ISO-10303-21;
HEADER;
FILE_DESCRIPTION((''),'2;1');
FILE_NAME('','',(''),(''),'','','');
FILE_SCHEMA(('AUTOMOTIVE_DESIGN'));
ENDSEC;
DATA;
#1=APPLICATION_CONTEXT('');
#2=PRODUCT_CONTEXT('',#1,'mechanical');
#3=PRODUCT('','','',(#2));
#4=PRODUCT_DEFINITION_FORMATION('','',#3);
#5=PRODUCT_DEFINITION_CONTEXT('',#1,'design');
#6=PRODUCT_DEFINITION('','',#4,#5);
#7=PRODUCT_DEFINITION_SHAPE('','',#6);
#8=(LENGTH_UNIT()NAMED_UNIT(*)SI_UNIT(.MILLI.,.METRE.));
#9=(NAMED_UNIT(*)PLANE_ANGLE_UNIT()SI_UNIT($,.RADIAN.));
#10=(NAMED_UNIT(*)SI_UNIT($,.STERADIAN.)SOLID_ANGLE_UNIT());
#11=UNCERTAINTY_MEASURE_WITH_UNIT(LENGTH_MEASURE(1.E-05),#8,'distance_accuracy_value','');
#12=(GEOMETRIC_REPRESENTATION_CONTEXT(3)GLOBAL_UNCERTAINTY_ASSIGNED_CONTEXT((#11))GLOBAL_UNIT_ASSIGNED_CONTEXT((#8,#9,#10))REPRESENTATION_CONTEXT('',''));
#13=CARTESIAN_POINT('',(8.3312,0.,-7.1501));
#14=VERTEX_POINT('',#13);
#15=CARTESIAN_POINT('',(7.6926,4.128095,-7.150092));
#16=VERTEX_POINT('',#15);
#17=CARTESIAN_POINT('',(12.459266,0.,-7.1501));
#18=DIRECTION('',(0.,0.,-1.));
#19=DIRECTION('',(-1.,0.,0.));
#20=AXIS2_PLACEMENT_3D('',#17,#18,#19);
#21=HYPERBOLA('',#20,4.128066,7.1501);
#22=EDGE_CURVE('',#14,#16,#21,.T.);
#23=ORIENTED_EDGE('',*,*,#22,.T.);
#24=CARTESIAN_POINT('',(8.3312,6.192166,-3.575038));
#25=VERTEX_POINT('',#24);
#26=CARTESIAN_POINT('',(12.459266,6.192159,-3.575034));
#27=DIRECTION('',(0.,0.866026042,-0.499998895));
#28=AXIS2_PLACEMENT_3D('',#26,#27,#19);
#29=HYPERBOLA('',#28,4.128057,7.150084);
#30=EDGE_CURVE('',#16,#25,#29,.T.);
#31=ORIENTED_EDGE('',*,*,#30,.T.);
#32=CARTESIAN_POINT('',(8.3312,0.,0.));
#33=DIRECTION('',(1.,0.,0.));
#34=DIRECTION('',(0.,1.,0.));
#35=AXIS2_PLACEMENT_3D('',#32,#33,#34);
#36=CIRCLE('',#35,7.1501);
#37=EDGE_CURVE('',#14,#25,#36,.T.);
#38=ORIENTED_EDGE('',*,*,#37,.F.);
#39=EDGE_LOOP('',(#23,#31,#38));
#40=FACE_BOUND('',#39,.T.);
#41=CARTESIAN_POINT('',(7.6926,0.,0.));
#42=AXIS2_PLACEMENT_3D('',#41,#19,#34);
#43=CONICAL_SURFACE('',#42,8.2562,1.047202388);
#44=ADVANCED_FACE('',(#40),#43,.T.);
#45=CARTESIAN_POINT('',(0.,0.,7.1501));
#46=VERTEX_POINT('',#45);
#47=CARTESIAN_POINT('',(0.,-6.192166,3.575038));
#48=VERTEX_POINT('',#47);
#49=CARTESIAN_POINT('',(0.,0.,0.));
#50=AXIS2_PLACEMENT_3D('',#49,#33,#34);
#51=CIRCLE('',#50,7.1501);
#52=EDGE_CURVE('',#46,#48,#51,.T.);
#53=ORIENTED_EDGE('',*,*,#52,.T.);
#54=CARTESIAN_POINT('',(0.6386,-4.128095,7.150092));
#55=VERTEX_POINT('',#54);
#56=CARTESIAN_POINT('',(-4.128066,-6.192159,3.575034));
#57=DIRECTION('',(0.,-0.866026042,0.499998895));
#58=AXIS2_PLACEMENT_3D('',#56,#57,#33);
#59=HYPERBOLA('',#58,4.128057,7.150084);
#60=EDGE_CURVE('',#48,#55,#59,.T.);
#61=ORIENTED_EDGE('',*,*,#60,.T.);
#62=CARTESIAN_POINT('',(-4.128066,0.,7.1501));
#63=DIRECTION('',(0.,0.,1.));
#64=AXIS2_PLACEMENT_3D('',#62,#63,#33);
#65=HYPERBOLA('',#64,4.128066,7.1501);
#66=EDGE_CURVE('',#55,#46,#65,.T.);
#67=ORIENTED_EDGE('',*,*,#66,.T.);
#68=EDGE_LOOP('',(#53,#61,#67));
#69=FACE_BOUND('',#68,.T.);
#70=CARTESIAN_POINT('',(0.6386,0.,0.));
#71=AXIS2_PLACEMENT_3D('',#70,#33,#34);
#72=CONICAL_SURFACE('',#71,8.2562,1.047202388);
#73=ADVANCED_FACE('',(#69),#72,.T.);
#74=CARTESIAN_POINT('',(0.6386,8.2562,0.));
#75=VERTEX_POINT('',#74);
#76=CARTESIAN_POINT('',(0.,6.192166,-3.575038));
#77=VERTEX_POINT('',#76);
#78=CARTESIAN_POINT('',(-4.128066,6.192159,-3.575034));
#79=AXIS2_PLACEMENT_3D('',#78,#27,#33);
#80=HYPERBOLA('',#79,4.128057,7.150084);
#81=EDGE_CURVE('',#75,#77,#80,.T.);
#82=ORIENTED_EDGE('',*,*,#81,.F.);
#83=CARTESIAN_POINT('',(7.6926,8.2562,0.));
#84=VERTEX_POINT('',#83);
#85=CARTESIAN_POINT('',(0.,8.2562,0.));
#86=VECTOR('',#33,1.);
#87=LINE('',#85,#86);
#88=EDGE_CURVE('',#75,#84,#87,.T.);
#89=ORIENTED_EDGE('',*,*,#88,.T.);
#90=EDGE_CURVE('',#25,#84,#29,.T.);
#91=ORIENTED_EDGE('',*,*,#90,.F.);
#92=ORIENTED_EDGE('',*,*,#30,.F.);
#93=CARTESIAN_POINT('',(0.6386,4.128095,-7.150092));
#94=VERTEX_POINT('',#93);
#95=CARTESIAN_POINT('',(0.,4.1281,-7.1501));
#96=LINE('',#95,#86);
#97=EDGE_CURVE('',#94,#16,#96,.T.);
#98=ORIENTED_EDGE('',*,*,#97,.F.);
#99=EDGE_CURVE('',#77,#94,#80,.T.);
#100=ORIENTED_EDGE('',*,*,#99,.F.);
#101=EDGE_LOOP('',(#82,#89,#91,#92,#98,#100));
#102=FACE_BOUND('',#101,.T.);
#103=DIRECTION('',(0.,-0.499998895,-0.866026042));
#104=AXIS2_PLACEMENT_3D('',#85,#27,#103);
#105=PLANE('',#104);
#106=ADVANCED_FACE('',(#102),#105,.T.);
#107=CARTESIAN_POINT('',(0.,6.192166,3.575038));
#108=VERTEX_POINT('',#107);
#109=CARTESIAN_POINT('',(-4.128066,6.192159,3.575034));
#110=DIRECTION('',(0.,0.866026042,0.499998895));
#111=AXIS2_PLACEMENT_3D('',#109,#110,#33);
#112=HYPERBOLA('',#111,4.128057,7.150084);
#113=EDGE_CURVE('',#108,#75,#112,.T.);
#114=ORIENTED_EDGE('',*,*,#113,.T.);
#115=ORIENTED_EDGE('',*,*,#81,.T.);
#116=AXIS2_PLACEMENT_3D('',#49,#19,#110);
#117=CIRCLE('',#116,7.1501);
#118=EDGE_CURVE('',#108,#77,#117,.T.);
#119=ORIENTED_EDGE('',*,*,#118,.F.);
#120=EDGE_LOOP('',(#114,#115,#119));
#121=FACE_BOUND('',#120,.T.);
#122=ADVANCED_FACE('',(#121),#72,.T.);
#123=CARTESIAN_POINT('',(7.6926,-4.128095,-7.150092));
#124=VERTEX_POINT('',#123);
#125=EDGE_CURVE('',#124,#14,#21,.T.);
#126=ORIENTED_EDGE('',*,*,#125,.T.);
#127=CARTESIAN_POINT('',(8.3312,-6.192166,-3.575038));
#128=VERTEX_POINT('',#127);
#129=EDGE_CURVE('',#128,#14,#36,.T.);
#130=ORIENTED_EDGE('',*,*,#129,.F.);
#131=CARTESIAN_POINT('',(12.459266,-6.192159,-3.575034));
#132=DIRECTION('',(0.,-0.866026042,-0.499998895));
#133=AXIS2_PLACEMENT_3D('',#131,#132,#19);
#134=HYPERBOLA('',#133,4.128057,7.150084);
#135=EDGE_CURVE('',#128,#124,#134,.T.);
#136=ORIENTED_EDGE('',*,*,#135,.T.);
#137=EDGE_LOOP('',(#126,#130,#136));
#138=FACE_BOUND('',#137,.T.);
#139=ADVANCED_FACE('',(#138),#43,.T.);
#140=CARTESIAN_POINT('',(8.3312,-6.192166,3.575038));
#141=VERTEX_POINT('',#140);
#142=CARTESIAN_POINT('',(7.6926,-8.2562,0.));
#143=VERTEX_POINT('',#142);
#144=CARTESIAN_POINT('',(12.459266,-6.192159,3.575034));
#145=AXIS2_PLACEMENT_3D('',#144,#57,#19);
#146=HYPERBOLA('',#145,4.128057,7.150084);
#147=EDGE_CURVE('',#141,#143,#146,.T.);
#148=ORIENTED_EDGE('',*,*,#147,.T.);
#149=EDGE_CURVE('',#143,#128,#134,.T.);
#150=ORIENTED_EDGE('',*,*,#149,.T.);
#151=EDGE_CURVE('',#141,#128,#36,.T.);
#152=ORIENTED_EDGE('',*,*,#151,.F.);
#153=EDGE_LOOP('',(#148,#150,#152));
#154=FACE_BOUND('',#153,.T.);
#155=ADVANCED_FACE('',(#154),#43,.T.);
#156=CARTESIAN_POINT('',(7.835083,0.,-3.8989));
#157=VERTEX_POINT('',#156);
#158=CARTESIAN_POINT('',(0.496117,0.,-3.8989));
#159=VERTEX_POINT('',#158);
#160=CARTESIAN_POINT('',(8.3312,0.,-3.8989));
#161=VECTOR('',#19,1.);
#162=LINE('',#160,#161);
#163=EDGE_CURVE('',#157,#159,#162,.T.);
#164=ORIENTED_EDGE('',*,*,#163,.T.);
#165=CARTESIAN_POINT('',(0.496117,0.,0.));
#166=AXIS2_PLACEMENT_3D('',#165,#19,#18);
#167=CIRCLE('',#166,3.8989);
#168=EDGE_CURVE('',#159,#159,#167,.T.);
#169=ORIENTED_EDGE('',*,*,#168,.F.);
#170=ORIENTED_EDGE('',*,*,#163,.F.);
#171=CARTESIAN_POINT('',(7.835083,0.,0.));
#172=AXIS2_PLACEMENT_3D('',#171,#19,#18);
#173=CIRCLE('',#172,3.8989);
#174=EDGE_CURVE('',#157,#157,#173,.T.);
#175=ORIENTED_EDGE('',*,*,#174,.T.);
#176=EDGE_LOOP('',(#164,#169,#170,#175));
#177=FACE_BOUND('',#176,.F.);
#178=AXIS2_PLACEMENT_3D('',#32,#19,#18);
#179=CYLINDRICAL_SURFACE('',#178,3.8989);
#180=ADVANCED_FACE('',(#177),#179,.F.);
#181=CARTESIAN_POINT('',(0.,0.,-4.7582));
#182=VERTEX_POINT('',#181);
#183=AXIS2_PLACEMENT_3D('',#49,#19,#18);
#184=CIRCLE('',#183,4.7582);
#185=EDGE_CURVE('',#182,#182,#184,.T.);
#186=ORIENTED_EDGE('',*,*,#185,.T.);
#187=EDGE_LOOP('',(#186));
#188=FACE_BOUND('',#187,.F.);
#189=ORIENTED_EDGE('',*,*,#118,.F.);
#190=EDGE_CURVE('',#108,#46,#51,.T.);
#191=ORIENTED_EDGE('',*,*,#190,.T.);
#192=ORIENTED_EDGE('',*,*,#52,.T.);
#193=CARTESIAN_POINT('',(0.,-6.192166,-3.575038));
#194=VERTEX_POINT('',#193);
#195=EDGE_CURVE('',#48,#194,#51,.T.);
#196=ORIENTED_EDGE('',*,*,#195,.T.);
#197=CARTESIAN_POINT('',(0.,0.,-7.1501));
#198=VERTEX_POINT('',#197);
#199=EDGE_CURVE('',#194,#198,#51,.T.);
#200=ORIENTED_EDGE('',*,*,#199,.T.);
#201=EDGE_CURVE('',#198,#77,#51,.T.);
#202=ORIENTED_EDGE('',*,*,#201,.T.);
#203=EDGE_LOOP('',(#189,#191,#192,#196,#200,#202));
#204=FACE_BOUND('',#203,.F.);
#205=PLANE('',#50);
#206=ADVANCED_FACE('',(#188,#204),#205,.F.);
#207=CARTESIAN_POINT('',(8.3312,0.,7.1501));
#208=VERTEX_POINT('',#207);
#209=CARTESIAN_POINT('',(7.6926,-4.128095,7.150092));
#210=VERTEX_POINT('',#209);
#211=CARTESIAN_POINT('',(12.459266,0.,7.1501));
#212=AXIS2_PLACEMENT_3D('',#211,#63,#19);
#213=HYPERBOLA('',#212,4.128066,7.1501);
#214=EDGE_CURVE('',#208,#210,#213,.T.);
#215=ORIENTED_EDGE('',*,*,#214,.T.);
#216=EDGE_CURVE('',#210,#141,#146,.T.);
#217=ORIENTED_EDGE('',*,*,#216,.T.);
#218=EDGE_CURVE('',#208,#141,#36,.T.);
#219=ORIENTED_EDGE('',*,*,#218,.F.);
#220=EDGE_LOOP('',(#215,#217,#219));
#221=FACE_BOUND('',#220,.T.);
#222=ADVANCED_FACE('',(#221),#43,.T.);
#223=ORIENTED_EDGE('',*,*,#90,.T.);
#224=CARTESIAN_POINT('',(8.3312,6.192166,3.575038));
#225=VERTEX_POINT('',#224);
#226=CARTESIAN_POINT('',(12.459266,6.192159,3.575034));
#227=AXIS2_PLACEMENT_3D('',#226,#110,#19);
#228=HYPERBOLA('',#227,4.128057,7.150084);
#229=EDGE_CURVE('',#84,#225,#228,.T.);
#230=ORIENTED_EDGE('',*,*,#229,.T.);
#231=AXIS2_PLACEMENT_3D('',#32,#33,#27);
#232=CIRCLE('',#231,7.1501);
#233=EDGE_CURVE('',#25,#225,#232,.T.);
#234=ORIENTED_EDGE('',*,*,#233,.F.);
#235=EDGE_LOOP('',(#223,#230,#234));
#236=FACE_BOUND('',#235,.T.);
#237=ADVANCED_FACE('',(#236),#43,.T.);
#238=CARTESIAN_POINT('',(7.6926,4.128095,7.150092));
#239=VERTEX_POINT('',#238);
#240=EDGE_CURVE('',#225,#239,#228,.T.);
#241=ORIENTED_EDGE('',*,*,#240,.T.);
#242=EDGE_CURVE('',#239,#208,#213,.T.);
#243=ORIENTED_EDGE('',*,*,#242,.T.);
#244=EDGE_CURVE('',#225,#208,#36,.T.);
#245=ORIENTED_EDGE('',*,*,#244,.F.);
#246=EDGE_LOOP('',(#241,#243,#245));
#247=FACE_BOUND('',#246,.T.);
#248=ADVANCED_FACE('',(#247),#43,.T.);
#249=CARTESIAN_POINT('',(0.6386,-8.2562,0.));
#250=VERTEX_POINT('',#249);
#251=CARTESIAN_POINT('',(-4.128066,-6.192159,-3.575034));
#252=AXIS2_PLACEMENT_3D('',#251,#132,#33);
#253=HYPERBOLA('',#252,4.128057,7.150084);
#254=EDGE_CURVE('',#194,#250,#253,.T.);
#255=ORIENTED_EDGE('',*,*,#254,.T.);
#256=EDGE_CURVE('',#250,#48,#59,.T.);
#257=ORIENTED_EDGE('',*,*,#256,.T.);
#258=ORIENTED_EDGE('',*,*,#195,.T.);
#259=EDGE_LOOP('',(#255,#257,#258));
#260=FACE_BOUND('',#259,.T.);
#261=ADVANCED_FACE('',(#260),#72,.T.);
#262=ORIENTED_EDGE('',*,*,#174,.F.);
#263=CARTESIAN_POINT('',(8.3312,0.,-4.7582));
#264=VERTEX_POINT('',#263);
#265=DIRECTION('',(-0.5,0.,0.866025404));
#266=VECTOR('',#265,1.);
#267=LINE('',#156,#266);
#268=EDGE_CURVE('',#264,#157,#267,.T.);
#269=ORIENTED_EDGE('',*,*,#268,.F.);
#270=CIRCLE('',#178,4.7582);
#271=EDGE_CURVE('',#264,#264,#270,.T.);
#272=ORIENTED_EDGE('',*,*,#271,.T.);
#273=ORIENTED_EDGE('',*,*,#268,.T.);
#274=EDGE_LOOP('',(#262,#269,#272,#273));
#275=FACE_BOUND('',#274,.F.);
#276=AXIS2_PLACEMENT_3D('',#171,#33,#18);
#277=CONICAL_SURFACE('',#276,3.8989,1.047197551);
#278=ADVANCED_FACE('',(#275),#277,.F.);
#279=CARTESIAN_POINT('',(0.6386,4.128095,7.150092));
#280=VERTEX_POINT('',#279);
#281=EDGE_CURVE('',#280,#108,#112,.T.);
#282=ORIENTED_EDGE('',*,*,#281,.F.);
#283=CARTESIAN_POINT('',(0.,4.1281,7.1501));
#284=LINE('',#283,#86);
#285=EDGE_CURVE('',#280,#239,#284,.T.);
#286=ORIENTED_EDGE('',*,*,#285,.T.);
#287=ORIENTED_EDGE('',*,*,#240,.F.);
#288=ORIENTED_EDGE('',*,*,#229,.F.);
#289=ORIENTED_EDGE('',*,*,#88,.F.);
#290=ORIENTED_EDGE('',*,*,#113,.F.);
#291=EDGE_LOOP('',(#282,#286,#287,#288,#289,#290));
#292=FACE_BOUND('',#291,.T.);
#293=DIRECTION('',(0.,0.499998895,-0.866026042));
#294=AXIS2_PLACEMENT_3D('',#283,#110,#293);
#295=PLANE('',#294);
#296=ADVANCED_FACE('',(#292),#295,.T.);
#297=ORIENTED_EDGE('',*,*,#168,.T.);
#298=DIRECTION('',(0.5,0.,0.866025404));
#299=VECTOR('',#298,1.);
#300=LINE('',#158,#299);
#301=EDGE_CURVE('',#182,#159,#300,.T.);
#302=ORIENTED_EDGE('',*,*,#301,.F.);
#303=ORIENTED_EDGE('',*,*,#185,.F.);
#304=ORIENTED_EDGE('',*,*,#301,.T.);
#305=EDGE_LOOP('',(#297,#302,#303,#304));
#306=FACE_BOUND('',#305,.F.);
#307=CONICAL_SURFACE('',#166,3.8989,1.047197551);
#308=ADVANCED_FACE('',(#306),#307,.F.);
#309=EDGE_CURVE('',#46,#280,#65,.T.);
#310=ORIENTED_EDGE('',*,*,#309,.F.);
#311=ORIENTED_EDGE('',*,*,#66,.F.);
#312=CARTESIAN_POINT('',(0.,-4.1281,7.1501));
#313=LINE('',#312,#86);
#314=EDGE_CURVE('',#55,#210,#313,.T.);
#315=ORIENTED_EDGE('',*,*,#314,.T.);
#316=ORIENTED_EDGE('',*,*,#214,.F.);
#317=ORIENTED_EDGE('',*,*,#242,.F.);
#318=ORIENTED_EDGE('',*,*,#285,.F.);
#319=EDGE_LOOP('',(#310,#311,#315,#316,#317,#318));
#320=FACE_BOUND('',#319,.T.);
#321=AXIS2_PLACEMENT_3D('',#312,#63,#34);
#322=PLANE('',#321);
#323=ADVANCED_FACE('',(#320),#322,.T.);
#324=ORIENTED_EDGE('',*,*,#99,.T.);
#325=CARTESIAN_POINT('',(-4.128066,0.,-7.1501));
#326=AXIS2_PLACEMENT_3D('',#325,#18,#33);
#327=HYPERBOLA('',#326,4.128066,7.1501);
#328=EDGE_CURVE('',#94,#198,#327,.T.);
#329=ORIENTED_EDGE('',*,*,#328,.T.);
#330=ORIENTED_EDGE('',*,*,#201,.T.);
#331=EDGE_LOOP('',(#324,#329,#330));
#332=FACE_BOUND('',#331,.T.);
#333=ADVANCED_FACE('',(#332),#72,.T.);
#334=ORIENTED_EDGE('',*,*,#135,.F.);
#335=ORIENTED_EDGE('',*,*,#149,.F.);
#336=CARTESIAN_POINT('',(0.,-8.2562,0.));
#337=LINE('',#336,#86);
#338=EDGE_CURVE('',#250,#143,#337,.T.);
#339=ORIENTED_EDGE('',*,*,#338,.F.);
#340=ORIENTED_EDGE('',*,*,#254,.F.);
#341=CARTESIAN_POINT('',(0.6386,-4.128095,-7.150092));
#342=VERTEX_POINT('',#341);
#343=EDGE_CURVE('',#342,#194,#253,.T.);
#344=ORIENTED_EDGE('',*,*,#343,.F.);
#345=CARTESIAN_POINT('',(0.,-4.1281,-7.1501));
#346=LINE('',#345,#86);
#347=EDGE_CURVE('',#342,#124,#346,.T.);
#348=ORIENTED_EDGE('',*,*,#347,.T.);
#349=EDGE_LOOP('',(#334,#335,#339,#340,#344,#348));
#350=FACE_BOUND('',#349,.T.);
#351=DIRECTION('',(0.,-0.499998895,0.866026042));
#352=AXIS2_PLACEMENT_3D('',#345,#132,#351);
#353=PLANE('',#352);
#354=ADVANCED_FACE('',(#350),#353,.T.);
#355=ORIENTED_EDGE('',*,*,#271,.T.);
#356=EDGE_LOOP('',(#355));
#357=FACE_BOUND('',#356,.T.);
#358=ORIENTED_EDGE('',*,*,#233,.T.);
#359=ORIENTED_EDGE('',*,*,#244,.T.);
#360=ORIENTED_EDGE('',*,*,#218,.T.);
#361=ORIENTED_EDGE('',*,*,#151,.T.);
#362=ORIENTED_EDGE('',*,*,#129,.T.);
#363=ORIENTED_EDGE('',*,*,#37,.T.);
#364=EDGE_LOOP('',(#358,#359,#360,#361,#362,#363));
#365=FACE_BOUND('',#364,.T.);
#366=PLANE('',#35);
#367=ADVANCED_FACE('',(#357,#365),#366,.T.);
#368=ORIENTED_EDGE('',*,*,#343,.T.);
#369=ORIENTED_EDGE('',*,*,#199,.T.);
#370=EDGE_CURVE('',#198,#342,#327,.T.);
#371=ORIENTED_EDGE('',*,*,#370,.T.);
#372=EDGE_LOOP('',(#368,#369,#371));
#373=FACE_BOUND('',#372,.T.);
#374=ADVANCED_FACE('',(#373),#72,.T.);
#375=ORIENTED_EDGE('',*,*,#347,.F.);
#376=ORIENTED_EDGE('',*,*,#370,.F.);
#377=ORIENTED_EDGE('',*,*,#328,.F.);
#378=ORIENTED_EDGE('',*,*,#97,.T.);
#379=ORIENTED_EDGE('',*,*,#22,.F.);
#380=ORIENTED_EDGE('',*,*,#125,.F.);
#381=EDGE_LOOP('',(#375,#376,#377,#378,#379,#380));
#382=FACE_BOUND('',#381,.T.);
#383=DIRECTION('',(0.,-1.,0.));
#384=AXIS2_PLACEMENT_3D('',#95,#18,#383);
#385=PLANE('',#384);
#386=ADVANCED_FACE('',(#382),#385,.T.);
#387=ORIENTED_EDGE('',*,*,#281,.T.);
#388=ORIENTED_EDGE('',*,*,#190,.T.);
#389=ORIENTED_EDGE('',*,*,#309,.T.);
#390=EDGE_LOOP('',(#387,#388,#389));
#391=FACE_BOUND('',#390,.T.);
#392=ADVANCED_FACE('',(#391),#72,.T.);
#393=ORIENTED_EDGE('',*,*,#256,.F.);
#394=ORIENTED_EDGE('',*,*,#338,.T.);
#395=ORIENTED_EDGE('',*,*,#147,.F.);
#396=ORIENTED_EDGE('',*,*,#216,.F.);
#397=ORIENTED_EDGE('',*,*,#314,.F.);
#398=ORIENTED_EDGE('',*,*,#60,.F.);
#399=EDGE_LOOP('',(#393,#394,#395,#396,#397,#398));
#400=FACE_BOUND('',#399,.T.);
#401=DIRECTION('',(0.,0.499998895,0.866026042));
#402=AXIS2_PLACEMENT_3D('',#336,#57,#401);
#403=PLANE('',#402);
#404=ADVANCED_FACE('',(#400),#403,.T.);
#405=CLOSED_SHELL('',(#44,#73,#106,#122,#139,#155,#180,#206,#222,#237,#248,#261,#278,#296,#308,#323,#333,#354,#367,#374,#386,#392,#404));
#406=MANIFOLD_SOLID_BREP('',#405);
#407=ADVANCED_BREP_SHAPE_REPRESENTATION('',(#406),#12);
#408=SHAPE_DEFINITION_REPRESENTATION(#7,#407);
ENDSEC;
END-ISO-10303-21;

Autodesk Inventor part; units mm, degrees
ref_plane "YZ Plane" through (0, 0, 0) normal (1, 0, 0) x (0, 1, 0)
ref_plane "XZ Plane" through (0, 0, 0) normal (0, 1, 0) x (-1, 0, 0)
sketch "Sketch1" plane through (0, 0, 0) normal (1, 0, 0) x (0, 1, 0)
  line L0 (-8.2562, 0) -> (-4.1281, 7.1501)
  line L1 (-4.1281, 7.1501) -> (4.1281, 7.1501)
  line L2 (4.1281, 7.1501) -> (8.2562, 0)
  line L3 (8.2562, 0) -> (4.1281, -7.1501)
  line L4 (4.1281, -7.1501) -> (-4.1281, -7.1501)
  line L5 (-4.1281, -7.1501) -> (-8.2562, 0)
  point P0 (0, 0)
  point P1 (0, 0)
  dimension "d0" = 16.5125
extrude "Body" add sketch "Sketch1" along normal blind 8.3312
sketch "Sketch2" plane through (0, 0, 0) normal (0, 0, 1) x (1, 0, 0)
  line L0 (0, 4.1281) -> (0, 8.2562) projected
  line L1 (0, 8.2562) -> (8.3312, 8.2562) projected
  line L2 (8.3312, 4.1281) -> (8.3312, 8.2562) projected
  line L3 (-1.6662, 0) -> (9.9974, 0) projected
  line L4 (0.6386, 8.2562) -> (0, 7.1501)
  line L5 (7.6926, 8.2562) -> (8.3312, 7.1501)
  dimension "d3" = 30
  dimension "d4" = 30
  dimension "d5" = 14.3002
  dimension "d6" = 14.3002
revolve "Chamfer1" cut sketch "Sketch2" angle 360 about axis through (-10, 0, 0) along (1, 0, 0)
sketch "Sketch3" plane through (8.3312, 0, 0) normal (1, 0, 0) x (0, 0, -1)
  arc A0 (-3.575, -6.1922) -> (3.5751, -6.1922) centre (0, 0) ccw projected
hole "Thread" at (8.3312, 0, 0) direction (-1, 0, 0) diameter 7.7978 end through all thread size "3/8-16 UNC" class "2B" standard "ANSI Unified Screw Threads"
chamfer "Chamfer2" distance 0.8593 angle 30 1 edges at (8.3312, 0, 3.8989) measured on face at (8.3312, -6.0308, -0.1567)
chamfer "Chamfer3" distance 0.8593 angle 30 1 edges at (0, 0, 3.8989) measured on face at (0, -6.0308, -0.1567)
ref_plane "Work Plane1" through (-15.0475, 0, 0) normal (0, -0.8660254, -0.5) x (1, 0, 0)
equation "\"d0\" = 1.1547 * SW"
equation "\"d1\" = KOH"
equation "\"d3\" = ANG1"
equation "\"d4\" = ANG2"
equation "\"d5\" = SW0"
equation "\"d6\" = SW01"
equation "\"d8\" = -0.5 * GD1 + 0.5 * NND"
equation "\"d40\" = -0.5 * GD1 + 0.5 * NND"
equation "\"d10\" = -0.5 * GD1 + 0.5 * NND"
equation "\"d41\" = -0.5 * GD1 + 0.5 * NND"
equation "\"ANG1\" = 30deg"
equation "\"ANG2\" = 30deg"
equation "\"NND\" = 9.525"
equation "\"KOH\" = 8.3312"
equation "\"SW\" = 14.3002"
equation "\"SW0\" = SW"
equation "\"SW01\" = SW"
equation "\"THREADDIA\" = 9.525"
equation "\"TOA\" = 30deg"
equation "\"E0\" = 1.155 * SW"
equation "\"GD1\" = 7.806481"
properties part number "ANSI B18.2.2 - 3/8 - 16" material "Steel, Mild"
